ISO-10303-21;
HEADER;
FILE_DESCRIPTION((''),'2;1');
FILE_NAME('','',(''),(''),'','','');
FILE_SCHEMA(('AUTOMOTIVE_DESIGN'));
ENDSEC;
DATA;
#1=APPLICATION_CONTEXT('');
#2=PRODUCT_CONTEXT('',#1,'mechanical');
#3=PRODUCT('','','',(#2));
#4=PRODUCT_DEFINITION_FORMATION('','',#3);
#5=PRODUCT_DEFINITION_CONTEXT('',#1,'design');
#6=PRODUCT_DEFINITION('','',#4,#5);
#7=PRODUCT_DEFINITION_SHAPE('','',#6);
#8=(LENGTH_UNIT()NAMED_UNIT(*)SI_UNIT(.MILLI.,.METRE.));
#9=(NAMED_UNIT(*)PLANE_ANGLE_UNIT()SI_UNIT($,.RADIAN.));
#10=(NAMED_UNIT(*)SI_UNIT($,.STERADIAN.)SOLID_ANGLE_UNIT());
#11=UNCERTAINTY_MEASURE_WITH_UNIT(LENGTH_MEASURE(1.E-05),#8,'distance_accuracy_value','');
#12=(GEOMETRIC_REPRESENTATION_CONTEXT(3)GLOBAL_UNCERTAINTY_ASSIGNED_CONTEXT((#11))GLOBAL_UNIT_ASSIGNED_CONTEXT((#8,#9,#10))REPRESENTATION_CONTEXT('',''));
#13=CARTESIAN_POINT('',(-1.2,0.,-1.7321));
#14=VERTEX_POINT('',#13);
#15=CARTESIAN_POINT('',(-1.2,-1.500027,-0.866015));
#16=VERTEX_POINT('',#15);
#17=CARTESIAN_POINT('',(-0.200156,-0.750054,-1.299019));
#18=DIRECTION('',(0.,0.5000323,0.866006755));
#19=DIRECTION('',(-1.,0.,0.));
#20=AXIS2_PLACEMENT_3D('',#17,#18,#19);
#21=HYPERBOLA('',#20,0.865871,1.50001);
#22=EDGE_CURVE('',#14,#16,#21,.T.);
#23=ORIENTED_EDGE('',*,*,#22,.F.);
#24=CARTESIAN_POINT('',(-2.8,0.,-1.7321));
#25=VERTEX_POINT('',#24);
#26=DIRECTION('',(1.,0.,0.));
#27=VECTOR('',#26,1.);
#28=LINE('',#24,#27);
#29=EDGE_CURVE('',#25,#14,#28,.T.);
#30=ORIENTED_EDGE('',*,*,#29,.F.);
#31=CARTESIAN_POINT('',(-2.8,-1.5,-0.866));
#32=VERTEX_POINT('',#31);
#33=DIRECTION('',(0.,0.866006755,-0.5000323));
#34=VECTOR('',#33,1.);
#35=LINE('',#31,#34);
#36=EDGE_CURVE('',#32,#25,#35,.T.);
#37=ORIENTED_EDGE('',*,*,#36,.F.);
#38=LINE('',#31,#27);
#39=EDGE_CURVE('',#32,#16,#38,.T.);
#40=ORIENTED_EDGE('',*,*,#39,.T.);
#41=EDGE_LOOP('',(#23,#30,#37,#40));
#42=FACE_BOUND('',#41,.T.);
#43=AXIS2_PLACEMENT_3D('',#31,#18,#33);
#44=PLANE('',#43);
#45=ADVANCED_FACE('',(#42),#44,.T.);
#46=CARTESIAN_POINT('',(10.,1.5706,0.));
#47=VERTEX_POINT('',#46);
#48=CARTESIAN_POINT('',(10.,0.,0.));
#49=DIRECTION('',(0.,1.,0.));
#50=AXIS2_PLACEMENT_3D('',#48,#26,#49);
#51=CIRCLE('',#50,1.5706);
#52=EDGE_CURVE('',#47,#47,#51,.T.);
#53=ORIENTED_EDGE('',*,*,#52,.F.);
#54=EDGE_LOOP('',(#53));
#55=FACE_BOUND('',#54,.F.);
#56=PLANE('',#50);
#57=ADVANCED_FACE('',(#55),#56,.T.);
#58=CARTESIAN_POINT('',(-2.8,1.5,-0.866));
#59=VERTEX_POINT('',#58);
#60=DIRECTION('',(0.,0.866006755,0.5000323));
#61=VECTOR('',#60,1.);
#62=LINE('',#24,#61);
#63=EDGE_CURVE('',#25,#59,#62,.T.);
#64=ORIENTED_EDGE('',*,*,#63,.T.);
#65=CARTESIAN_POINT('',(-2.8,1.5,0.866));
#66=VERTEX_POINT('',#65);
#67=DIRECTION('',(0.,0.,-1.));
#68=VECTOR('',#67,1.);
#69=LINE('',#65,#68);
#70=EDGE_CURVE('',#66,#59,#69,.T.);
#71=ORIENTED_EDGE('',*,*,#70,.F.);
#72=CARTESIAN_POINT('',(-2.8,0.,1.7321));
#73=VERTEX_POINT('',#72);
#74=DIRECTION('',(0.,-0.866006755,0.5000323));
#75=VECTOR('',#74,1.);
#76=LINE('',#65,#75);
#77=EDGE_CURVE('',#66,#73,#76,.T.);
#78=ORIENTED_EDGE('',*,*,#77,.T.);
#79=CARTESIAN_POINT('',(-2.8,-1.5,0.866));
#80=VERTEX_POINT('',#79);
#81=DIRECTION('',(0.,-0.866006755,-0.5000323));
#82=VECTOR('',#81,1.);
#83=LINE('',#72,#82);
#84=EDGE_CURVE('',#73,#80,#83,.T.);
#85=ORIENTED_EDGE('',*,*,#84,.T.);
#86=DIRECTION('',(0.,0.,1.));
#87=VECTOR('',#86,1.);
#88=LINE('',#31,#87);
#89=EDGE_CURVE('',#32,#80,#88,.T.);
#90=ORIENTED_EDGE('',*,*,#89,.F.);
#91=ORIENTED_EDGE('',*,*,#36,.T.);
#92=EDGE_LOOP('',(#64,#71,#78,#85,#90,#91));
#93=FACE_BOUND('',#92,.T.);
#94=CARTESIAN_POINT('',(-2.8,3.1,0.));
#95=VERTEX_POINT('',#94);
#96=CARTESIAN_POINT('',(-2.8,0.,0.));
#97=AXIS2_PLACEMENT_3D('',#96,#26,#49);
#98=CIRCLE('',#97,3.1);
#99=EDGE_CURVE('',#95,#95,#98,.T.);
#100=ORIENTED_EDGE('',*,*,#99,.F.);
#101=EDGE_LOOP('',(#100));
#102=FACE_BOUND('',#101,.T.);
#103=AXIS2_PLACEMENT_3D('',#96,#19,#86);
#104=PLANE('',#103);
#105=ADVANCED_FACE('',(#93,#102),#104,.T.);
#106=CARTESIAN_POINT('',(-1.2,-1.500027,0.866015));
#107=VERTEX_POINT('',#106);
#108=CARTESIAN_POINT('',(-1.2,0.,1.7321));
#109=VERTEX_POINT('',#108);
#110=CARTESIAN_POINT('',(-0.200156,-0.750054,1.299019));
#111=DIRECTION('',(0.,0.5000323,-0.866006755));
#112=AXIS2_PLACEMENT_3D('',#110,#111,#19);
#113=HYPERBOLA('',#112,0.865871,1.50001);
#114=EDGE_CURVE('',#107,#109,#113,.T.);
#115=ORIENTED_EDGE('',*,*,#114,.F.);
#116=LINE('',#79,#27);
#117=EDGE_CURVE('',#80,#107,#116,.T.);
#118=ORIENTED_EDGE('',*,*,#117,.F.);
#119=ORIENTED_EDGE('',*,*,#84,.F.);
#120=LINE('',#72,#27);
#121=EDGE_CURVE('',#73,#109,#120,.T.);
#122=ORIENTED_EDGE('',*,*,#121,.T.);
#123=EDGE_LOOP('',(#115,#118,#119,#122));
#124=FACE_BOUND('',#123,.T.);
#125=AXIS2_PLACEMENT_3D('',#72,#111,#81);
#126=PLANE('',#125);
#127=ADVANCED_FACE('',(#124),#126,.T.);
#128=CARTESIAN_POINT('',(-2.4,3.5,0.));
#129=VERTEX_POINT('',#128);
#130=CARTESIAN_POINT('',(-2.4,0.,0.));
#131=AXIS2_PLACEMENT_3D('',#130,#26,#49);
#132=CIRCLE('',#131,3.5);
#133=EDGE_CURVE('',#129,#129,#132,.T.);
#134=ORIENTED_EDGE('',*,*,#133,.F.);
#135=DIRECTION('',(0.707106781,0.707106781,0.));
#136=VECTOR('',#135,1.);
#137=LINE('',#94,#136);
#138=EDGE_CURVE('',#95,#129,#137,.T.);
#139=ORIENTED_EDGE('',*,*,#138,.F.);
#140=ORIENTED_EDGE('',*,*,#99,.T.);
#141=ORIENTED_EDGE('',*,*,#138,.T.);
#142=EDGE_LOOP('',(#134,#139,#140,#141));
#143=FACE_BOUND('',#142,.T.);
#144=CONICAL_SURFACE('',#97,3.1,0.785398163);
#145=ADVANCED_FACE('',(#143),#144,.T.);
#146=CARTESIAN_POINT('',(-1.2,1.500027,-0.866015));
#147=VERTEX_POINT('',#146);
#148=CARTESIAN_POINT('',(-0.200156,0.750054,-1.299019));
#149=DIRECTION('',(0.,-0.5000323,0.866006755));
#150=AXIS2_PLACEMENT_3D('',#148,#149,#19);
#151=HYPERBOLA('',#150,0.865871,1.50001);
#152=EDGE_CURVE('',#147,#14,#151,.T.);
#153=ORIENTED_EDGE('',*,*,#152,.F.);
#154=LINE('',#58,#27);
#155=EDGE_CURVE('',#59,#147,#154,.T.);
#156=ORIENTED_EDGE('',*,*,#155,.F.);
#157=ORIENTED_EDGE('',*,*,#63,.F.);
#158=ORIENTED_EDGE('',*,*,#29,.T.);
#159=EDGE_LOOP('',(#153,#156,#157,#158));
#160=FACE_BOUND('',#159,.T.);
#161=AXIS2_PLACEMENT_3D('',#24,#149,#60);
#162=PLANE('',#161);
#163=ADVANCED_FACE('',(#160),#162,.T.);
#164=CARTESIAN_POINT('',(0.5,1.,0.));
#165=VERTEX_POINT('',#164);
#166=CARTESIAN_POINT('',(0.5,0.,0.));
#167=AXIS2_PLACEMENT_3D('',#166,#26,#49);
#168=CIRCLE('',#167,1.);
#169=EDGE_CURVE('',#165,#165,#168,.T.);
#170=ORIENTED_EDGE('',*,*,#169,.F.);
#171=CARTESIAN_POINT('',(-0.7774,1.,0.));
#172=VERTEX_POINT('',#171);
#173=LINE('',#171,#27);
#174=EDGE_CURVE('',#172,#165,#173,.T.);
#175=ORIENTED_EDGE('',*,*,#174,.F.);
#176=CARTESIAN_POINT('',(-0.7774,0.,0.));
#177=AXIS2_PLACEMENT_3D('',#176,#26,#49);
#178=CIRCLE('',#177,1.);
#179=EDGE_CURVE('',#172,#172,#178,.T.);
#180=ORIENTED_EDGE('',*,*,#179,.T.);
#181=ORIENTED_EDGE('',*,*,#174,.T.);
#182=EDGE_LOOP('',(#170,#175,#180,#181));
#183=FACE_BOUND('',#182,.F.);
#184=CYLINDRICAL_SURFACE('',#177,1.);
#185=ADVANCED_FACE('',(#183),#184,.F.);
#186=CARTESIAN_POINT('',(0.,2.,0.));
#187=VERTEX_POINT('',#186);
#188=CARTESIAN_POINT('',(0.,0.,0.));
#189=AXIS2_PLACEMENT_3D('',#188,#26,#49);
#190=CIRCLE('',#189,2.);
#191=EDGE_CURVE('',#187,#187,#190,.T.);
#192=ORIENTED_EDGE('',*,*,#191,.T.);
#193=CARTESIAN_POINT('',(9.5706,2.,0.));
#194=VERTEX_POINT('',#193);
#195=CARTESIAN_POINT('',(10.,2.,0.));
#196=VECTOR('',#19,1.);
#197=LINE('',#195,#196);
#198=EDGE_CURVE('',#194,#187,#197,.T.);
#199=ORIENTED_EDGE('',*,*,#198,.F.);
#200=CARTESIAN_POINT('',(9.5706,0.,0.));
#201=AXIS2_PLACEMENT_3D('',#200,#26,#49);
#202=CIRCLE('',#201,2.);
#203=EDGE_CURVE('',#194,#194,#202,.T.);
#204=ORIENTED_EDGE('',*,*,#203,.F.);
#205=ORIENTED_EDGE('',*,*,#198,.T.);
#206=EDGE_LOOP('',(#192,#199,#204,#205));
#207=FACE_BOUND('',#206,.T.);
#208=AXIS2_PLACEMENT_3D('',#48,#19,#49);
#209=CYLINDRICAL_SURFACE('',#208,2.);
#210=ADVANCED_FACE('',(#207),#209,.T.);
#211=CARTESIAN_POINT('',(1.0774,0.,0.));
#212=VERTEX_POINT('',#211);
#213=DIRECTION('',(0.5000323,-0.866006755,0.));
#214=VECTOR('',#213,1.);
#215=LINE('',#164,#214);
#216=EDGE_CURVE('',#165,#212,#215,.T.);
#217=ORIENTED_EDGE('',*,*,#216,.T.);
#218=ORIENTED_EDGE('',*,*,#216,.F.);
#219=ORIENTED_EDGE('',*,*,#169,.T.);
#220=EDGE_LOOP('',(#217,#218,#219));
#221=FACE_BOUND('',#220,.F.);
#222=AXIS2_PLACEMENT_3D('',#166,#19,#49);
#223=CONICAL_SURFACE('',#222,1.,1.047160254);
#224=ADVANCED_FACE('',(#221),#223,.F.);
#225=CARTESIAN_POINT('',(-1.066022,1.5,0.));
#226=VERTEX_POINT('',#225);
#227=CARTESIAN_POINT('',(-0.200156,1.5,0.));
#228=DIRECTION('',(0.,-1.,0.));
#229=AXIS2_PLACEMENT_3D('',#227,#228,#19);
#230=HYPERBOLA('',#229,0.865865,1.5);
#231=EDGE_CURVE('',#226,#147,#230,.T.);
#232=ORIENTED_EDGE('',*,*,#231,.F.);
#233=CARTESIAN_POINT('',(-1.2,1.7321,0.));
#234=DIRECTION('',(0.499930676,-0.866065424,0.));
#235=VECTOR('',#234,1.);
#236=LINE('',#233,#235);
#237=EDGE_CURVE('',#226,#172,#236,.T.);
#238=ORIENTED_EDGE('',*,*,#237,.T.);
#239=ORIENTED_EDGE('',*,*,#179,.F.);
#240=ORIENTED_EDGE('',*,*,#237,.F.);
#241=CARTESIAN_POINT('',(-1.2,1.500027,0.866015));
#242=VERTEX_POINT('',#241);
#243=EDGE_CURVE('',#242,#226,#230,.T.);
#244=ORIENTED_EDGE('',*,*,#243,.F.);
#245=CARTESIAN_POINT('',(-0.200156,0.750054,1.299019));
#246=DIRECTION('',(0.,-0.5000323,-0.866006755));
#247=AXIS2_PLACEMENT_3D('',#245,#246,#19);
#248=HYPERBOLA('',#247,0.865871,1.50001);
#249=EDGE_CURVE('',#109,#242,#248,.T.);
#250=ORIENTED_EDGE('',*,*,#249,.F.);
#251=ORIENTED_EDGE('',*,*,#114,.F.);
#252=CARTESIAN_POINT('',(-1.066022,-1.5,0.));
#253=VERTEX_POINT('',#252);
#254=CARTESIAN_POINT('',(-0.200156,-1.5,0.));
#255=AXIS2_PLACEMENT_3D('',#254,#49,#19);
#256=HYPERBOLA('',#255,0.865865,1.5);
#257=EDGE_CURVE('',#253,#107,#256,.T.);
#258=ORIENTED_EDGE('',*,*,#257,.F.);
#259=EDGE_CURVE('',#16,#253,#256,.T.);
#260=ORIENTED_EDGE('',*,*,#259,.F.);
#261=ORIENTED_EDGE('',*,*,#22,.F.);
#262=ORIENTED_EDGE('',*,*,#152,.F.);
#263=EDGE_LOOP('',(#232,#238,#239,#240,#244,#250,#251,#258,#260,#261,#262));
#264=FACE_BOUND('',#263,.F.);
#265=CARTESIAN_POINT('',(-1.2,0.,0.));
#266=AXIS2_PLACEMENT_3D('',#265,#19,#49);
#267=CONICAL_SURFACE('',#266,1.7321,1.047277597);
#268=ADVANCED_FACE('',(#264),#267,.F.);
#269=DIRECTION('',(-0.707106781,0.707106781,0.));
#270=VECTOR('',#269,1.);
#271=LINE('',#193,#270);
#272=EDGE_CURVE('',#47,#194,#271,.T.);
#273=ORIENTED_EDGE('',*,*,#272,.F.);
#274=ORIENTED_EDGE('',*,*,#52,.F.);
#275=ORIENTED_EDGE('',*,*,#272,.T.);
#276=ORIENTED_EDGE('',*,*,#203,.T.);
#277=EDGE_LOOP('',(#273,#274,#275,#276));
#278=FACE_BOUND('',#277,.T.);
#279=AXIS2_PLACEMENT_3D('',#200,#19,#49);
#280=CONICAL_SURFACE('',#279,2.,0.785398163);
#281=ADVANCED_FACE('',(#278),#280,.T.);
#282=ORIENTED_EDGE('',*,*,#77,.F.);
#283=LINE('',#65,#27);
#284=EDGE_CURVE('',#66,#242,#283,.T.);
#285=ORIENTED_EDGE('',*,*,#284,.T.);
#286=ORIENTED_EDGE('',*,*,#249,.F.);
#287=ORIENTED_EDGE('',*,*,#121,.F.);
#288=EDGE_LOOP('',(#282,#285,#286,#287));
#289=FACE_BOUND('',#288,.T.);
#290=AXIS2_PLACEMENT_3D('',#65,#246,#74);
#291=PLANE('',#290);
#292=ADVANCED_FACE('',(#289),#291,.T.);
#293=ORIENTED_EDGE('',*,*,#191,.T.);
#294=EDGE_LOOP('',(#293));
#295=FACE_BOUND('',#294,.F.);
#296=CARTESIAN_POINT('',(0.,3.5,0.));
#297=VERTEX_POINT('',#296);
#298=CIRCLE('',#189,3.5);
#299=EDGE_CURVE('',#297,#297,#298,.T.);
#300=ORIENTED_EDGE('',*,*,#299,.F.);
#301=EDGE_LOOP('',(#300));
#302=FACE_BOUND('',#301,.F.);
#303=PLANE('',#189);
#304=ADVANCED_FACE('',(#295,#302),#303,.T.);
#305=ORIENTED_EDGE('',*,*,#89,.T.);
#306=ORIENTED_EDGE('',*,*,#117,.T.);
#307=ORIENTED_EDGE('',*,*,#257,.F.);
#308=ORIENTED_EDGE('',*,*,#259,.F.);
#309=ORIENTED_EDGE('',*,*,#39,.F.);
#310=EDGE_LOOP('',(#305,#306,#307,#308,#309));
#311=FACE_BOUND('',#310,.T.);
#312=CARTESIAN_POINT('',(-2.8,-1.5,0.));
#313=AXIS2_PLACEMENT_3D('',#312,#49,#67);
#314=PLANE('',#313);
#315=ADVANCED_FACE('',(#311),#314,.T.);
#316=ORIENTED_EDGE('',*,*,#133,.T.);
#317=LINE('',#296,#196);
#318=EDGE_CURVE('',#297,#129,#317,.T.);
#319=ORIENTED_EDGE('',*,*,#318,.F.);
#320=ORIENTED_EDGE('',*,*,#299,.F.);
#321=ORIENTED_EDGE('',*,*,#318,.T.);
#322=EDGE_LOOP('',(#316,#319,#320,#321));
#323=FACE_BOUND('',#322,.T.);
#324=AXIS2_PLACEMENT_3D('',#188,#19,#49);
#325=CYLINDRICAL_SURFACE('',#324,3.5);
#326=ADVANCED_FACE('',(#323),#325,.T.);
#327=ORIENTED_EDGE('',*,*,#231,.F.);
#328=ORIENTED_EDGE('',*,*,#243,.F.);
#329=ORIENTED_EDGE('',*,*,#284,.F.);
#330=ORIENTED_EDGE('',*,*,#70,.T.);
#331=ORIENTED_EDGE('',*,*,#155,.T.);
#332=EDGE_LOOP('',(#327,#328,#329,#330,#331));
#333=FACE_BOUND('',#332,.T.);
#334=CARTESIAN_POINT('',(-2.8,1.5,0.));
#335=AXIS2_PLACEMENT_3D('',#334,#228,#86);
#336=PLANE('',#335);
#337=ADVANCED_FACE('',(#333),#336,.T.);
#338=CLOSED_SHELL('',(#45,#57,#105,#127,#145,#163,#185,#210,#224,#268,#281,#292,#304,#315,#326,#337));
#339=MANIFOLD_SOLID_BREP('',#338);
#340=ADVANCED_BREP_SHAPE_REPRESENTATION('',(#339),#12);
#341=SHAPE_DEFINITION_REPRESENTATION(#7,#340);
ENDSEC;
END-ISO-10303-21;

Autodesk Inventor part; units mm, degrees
ref_plane "YZ Plane" through (0, 0, 0) normal (1, 0, 0) x (0, 1, 0)
ref_plane "XZ Plane" through (0, 0, 0) normal (0, 1, 0) x (-1, 0, 0)
sketch "Эскиз1" plane through (0, 0, 0) normal (0, 0, 1) x (1, 0, 0)
  line L0 (1.0774, 0) -> (10, 0)
  line L1 (10, 0) -> (10, 2)
  line L2 (10, 2) -> (0, 2)
  line L3 (0, 2) -> (0, 3.5)
  line L4 (0, 3.5) -> (-2.8, 3.5)
  line L5 (-2.8, 3.5) -> (-2.8, 1.7321)
  line L6 (-2.8, 1.7321) -> (-1.2, 1.7321)
  line L7 (-1.2, 1.7321) -> (-0.7774, 1)
  line L8 (-5.36, 0) -> (12.56, 0) projected
  line L9 (0, -0.7) -> (0, 4.2) projected
  line L10 (-0.7774, 1) -> (0.5, 1)
  line L11 (0.5, 1) -> (1.0774, 0)
  line L12 (-2.8, 1.7321) -> (-2.8, 0) construction
  line L13 (-2.8, 3.1) -> (-2.4, 3.5)
  dimension "d0" = 2.8
  dimension "d1" = 1.6
  dimension "d2" = 60
  dimension "d3" = 4
  dimension "d4" = 3.4641
  dimension "d5" = 7
  dimension "d15" = 3.3
  dimension "d16" = 2
  dimension "d17" = 10
  dimension "d32" = 45
  dimension "d33" = 0.4
revolve "Базовый элемент" add sketch "Эскиз1" angle 360 about axis through (1.0774, 0, 0) along (1, 0, 0) contours L11 L10 L9 L2 L1 L0 | L10 L7 L6 L5 L13 L4 L3 L9 | L13 L5 L4
revolve "Фаска2" cut sketch "Эскиз1" angle 360 about axis through (-10, 0, 0) along (1, 0, 0) contours L13 L5 L4
sketch "Эскиз2" plane through (-2.8, 0, 0) normal (-1, 0, 0) x (0, 0, 1)
  circle A0 centre (0, 0) radius 1.7321 projected
  line L0 (0, -4.9) -> (0, 4.9) projected
  line L1 (-4.9, 0) -> (4.9, 0) projected
  line L2 (1.7321, 0) -> (0.866, -1.5)
  line L3 (0.866, -1.5) -> (-0.866, -1.5)
  line L4 (-0.866, -1.5) -> (-1.7321, 0)
  line L5 (-1.7321, 0) -> (-0.866, 1.5)
  line L6 (-0.866, 1.5) -> (0.866, 1.5)
  line L7 (0.866, 1.5) -> (1.7321, 0)
extrude "Паз" add sketch "Эскиз2" against normal up to next contours L7 A0 | A0 L2 | L6 L0 A0 | A0 L0 L3 | L0 L6 A0 | A0 L3 L0 | L4 A0 | A0 L5
thread "Резьба" size "M4x0.7" class "6g" standard "ISO Metric profile" length 6.5
chamfer "Фаска1" distance 0.4294 distance2 0.4294 1 edges at (10, -2, 0) measured on face at (10, 0.556, 0.0273)
ref_plane "Work Plane1" through (5, 0, 0) normal (0, 0.5, 0.8660254) x (1, 0, 0)
equation "\"d0\" = KOH"
equation "\"d1\" = INTI"
equation "\"d3\" = GD"
equation "\"d4\" = 1.1547 * SW"
equation "\"d5\" = KOD"
equation "\"d15\" = INFT"
equation "\"d16\" = SDT"
equation "\"d17\" = NLG"
equation "\"d33\" = Cham"
equation "\"d7\" = GEL"
equation "\"d9\" = -0.5 * SPD + 0.5 * GD"
equation "\"d12\" = GUL"
equation "\"GD\" = NND"
equation "\"NLG\" = 10"
equation "\"GEL\" = 6.5"
equation "\"KOD\" = 7"
equation "\"KOH\" = 2.8"
equation "\"GUL\" = 0.61345 * PTC"
equation "\"SW\" = 3"
equation "\"INTI\" = 1.6"
equation "\"SPD\" = NND - 1.2269 * PTC"
equation "\"SDT\" = 2"
equation "\"INFT\" = 3.3"
equation "\"Cham\" = 0.4"
equation "\"TOA\" = 30deg"
equation "\"GD1\" = THREADDIA - 1.2269 * PTC"
equation "\"THREADDIA\" = 4"
equation "\"BDM\" = NND"
equation "\"FAWI\" = 45deg"
equation "\"RR\" = 0.1 * NND"
equation "\"PTC\" = 0.7"
equation "\"NND\" = 4"
equation "\"FAWI1\" = 45deg"
equation "\"GAL\" = 0.61345 * PTC"
equation "\"E0\" = 1.155 * SW"
properties part number "DIN 6912 - M4 x 10" material "Сталь, мягкая"
